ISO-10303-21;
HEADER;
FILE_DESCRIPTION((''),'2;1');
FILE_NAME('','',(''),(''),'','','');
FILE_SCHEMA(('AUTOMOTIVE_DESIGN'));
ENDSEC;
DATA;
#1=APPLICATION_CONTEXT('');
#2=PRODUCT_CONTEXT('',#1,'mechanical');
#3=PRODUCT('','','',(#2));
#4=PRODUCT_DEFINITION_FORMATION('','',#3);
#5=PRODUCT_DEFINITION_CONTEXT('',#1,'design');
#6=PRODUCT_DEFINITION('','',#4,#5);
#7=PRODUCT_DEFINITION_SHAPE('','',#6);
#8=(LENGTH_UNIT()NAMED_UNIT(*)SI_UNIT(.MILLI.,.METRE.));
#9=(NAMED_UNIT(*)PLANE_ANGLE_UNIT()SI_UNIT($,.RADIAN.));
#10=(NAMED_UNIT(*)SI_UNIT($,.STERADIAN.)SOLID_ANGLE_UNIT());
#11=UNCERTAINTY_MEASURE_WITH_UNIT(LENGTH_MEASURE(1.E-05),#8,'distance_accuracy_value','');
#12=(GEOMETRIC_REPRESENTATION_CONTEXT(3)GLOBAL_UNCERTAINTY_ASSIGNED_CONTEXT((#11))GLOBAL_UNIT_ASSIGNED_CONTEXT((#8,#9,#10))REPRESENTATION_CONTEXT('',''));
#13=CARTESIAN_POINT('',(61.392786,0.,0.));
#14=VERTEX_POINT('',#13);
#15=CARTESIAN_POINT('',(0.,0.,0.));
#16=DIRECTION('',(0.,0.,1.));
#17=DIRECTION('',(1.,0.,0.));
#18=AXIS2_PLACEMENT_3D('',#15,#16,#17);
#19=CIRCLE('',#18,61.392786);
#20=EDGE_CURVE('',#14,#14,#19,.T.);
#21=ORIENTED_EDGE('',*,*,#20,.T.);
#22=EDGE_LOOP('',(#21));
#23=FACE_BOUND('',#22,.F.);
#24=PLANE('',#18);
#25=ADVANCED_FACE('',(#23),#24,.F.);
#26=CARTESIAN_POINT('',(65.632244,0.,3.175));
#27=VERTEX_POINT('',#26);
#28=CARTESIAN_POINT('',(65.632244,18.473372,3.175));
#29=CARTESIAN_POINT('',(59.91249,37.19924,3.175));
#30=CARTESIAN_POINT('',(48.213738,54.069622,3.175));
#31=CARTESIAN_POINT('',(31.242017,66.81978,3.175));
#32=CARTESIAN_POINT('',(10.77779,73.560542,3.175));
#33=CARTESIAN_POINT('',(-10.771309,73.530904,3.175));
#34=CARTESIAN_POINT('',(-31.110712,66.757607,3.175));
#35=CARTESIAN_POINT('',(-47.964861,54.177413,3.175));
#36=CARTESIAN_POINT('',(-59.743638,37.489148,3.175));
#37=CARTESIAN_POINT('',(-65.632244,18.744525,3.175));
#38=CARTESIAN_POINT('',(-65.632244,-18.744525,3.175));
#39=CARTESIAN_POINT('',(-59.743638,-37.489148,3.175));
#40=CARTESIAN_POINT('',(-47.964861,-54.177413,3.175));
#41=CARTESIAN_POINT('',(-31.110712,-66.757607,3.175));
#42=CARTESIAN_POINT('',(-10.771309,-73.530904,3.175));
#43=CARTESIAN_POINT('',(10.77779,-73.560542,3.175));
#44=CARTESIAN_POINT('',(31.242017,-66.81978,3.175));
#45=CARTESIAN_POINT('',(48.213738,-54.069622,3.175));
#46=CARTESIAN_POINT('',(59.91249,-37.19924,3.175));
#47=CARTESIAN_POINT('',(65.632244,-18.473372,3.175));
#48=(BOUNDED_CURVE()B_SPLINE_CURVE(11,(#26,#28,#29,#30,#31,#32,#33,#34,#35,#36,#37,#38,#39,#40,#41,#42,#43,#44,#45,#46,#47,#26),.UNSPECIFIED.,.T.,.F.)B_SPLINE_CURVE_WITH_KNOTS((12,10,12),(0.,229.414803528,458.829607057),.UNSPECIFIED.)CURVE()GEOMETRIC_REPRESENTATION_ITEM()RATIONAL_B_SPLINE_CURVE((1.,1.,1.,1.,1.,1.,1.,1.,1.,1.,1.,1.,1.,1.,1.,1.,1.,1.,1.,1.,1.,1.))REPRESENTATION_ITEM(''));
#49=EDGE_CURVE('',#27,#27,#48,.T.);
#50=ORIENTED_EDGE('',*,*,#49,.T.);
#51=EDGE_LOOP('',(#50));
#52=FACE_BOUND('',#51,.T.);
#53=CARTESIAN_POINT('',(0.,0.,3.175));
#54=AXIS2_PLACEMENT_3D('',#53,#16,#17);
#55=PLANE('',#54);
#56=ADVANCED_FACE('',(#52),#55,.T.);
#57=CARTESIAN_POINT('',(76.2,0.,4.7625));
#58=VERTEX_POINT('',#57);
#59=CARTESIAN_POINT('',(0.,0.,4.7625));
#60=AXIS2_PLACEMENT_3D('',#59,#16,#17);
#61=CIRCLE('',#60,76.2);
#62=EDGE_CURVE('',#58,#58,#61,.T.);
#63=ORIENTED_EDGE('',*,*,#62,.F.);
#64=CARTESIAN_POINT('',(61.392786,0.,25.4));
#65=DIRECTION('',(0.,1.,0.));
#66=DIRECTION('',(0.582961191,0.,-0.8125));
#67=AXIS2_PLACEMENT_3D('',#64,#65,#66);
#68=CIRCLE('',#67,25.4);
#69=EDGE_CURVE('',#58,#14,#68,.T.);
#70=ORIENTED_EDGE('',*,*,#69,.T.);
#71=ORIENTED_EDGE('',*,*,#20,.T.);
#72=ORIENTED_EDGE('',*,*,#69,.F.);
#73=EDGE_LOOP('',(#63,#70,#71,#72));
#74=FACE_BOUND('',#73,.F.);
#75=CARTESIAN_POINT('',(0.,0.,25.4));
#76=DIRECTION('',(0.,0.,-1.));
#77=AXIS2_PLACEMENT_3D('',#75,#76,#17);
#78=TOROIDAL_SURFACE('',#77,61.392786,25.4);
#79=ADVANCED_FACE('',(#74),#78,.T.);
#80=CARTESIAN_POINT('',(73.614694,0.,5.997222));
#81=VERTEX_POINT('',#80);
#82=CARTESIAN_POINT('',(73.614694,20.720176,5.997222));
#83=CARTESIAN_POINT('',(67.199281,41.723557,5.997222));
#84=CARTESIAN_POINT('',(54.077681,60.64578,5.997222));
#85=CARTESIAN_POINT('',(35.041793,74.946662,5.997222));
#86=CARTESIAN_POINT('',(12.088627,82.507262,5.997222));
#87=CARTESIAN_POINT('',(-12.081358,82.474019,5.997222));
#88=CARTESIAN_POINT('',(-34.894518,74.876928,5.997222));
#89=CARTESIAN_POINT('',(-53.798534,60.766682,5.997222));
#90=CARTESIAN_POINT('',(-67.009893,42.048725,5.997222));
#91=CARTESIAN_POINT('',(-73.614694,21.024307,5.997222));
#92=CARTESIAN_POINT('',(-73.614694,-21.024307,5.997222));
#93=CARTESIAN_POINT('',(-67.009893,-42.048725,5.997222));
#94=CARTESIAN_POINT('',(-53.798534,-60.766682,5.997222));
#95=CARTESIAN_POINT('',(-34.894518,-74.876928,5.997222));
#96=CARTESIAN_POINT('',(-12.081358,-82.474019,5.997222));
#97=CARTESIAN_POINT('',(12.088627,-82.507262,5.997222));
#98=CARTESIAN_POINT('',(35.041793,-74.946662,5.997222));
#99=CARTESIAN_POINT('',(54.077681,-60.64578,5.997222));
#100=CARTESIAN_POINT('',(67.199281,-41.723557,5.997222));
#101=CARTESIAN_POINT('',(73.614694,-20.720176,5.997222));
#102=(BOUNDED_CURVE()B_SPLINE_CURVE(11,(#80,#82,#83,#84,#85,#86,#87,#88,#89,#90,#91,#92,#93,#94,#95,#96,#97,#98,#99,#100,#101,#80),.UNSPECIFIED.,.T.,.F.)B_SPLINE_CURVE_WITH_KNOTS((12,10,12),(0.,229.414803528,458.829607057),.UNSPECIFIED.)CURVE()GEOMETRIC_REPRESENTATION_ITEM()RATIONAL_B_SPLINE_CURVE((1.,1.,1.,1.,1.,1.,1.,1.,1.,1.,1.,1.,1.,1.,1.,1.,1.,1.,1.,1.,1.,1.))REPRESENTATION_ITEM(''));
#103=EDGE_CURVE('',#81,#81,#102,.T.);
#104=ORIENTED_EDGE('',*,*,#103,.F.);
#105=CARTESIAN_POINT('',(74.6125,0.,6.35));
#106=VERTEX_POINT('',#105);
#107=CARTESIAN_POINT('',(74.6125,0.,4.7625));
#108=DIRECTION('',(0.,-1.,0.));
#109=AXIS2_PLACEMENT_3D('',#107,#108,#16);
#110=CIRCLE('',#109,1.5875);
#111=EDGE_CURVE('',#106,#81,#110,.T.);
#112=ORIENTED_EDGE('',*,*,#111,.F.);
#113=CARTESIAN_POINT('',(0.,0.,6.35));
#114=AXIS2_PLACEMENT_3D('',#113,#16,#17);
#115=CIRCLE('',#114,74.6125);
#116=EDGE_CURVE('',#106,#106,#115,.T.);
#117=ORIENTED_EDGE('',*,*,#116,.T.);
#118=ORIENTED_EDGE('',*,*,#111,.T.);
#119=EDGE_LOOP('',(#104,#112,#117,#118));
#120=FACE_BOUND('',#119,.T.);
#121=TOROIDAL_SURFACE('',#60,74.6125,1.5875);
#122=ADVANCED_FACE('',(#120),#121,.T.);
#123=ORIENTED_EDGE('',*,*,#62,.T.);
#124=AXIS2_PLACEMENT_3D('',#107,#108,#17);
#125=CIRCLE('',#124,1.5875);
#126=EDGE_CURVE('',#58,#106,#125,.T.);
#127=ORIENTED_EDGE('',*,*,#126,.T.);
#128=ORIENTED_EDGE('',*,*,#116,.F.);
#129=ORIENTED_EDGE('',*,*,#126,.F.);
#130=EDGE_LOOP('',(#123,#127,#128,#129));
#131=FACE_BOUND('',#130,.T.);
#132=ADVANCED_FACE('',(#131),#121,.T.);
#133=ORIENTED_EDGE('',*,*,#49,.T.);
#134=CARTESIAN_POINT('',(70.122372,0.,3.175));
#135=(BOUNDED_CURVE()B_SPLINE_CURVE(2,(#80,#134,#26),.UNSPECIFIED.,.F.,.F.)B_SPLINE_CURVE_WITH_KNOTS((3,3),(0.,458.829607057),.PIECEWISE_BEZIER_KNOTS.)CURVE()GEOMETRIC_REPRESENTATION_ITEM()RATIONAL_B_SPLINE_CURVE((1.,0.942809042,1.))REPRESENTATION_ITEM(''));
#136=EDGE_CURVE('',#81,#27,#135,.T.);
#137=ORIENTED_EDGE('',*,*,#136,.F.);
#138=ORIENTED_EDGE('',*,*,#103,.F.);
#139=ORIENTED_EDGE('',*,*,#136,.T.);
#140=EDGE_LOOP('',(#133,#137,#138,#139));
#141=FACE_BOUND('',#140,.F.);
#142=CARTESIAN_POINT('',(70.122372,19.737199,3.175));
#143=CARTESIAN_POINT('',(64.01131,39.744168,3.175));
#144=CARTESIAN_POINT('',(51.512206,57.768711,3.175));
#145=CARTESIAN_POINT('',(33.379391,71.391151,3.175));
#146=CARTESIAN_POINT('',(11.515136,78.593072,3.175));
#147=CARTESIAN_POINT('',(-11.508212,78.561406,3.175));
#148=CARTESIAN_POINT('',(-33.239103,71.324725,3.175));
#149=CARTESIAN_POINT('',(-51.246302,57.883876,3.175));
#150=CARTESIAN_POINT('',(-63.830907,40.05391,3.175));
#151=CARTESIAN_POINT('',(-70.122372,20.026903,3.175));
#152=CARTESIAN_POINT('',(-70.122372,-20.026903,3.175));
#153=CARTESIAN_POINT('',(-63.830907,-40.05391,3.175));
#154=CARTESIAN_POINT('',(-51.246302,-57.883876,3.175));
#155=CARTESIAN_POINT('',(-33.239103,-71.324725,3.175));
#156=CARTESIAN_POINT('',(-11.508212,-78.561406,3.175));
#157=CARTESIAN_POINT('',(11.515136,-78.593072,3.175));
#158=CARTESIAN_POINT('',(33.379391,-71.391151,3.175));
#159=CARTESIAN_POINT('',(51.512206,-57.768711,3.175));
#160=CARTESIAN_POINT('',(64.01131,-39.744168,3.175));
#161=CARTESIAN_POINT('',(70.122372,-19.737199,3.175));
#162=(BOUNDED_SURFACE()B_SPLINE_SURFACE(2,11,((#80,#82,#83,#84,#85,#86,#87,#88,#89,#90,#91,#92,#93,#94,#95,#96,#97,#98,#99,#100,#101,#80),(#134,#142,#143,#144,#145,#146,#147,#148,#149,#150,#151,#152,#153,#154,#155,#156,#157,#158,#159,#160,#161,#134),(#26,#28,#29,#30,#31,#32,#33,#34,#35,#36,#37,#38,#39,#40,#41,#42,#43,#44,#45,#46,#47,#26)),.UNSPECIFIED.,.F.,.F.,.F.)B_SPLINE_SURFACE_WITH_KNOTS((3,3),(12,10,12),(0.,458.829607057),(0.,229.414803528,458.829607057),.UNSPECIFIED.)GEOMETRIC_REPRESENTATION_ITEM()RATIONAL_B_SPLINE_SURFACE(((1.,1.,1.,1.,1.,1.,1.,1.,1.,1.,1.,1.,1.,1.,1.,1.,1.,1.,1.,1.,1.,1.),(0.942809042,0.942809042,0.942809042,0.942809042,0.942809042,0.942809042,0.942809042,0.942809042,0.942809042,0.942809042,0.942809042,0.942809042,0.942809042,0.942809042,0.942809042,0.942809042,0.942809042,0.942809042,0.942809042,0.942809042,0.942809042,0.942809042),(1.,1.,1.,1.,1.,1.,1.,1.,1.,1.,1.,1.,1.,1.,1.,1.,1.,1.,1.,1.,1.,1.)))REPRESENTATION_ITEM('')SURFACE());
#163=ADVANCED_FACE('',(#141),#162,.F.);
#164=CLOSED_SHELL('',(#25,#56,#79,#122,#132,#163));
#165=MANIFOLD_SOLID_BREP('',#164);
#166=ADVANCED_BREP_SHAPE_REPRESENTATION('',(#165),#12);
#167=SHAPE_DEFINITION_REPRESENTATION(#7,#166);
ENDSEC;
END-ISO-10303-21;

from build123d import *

# Parameters (mm, degrees)
F0_R     = 76.2
F1_DEPTH = 6.35
F2_R     = 73.025
F3_DEPTH = 3.175
F5_R     = 12.7


# Not quite as in the source:
# - a fillet or chamfer that OpenCascade refuses, or shapes differently, is made with other operations: its cross-section is extruded or revolved along the edge and cut away or added


with BuildPart() as f1:
    # F0 (on Top) → F1 (new body)
    with BuildSketch(Plane.XY):
        Circle(F0_R)
    extrude(amount=F1_DEPTH)

    # F2 (on face) → F3 (cut)
    with BuildSketch(Plane.XY.offset(6.35)):
        Circle(F2_R)
    extrude(amount=-F3_DEPTH, mode=Mode.SUBTRACT)

    # F4: fillet of radius 1.5875 on 2 edges, made by hand

    # F4_s1 → F4_t2 (revolve, cut)
    with BuildSketch(Plane.XZ):
        with BuildLine():
            ThreePointArc((74.6125, 6.35), (73.4899679849, 5.8850320151), (73.025, 4.7625))
            Line((73.025, 4.7625), (73.025, 6.35))
            Line((73.025, 6.35), (74.6125, 6.35))
        make_face()
    revolve(axis=Axis((0, 0, 6.35), (0, 0, 1)), mode=Mode.SUBTRACT)

    # F4_s3 → F4_t4 (revolve, cut)
    with BuildSketch(Plane.XZ):
        with BuildLine():
            ThreePointArc((76.2, 4.7625), (75.7350320151, 5.8850320151), (74.6125, 6.35))
            Line((74.6125, 6.35), (76.2, 6.35))
            Line((76.2, 6.35), (76.2, 4.7625))
        make_face()
    revolve(axis=Axis((0, 0, 6.35), (0, 0, 1)), mode=Mode.SUBTRACT)

    # F5
    f5_edges = [f1.edges().sort_by_distance(p)[0] for p in [
        (-73.025, 0, 3.175),
    ]]
    fillet(f5_edges, radius=F5_R)

    # F6: fillet of radius 25.4 on 1 edges, made by hand

    # F6_s1 → F6_t2 (revolve, cut)
    with BuildSketch(Plane.XZ):
        with BuildLine():
            ThreePointArc((76.2, 4.7625), (69.1699156866, 1.2199203889), (61.3927857532, 0))
            Line((61.3927857532, 0), (61.3927857532, -0.508))
            Line((61.3927857532, -0.508), (76.2, -0.508))
            Line((76.2, -0.508), (76.708, 0))
            ThreePointArc((76.708, 0), (76.708, 2.38125), (76.4961442849, 4.34975))
            Line((76.4961442849, 4.34975), (76.2, 4.7625))
        make_face()
    revolve(axis=Axis((0, 0, 0), (0, 0, 1)), mode=Mode.SUBTRACT)


solid = f1.part
